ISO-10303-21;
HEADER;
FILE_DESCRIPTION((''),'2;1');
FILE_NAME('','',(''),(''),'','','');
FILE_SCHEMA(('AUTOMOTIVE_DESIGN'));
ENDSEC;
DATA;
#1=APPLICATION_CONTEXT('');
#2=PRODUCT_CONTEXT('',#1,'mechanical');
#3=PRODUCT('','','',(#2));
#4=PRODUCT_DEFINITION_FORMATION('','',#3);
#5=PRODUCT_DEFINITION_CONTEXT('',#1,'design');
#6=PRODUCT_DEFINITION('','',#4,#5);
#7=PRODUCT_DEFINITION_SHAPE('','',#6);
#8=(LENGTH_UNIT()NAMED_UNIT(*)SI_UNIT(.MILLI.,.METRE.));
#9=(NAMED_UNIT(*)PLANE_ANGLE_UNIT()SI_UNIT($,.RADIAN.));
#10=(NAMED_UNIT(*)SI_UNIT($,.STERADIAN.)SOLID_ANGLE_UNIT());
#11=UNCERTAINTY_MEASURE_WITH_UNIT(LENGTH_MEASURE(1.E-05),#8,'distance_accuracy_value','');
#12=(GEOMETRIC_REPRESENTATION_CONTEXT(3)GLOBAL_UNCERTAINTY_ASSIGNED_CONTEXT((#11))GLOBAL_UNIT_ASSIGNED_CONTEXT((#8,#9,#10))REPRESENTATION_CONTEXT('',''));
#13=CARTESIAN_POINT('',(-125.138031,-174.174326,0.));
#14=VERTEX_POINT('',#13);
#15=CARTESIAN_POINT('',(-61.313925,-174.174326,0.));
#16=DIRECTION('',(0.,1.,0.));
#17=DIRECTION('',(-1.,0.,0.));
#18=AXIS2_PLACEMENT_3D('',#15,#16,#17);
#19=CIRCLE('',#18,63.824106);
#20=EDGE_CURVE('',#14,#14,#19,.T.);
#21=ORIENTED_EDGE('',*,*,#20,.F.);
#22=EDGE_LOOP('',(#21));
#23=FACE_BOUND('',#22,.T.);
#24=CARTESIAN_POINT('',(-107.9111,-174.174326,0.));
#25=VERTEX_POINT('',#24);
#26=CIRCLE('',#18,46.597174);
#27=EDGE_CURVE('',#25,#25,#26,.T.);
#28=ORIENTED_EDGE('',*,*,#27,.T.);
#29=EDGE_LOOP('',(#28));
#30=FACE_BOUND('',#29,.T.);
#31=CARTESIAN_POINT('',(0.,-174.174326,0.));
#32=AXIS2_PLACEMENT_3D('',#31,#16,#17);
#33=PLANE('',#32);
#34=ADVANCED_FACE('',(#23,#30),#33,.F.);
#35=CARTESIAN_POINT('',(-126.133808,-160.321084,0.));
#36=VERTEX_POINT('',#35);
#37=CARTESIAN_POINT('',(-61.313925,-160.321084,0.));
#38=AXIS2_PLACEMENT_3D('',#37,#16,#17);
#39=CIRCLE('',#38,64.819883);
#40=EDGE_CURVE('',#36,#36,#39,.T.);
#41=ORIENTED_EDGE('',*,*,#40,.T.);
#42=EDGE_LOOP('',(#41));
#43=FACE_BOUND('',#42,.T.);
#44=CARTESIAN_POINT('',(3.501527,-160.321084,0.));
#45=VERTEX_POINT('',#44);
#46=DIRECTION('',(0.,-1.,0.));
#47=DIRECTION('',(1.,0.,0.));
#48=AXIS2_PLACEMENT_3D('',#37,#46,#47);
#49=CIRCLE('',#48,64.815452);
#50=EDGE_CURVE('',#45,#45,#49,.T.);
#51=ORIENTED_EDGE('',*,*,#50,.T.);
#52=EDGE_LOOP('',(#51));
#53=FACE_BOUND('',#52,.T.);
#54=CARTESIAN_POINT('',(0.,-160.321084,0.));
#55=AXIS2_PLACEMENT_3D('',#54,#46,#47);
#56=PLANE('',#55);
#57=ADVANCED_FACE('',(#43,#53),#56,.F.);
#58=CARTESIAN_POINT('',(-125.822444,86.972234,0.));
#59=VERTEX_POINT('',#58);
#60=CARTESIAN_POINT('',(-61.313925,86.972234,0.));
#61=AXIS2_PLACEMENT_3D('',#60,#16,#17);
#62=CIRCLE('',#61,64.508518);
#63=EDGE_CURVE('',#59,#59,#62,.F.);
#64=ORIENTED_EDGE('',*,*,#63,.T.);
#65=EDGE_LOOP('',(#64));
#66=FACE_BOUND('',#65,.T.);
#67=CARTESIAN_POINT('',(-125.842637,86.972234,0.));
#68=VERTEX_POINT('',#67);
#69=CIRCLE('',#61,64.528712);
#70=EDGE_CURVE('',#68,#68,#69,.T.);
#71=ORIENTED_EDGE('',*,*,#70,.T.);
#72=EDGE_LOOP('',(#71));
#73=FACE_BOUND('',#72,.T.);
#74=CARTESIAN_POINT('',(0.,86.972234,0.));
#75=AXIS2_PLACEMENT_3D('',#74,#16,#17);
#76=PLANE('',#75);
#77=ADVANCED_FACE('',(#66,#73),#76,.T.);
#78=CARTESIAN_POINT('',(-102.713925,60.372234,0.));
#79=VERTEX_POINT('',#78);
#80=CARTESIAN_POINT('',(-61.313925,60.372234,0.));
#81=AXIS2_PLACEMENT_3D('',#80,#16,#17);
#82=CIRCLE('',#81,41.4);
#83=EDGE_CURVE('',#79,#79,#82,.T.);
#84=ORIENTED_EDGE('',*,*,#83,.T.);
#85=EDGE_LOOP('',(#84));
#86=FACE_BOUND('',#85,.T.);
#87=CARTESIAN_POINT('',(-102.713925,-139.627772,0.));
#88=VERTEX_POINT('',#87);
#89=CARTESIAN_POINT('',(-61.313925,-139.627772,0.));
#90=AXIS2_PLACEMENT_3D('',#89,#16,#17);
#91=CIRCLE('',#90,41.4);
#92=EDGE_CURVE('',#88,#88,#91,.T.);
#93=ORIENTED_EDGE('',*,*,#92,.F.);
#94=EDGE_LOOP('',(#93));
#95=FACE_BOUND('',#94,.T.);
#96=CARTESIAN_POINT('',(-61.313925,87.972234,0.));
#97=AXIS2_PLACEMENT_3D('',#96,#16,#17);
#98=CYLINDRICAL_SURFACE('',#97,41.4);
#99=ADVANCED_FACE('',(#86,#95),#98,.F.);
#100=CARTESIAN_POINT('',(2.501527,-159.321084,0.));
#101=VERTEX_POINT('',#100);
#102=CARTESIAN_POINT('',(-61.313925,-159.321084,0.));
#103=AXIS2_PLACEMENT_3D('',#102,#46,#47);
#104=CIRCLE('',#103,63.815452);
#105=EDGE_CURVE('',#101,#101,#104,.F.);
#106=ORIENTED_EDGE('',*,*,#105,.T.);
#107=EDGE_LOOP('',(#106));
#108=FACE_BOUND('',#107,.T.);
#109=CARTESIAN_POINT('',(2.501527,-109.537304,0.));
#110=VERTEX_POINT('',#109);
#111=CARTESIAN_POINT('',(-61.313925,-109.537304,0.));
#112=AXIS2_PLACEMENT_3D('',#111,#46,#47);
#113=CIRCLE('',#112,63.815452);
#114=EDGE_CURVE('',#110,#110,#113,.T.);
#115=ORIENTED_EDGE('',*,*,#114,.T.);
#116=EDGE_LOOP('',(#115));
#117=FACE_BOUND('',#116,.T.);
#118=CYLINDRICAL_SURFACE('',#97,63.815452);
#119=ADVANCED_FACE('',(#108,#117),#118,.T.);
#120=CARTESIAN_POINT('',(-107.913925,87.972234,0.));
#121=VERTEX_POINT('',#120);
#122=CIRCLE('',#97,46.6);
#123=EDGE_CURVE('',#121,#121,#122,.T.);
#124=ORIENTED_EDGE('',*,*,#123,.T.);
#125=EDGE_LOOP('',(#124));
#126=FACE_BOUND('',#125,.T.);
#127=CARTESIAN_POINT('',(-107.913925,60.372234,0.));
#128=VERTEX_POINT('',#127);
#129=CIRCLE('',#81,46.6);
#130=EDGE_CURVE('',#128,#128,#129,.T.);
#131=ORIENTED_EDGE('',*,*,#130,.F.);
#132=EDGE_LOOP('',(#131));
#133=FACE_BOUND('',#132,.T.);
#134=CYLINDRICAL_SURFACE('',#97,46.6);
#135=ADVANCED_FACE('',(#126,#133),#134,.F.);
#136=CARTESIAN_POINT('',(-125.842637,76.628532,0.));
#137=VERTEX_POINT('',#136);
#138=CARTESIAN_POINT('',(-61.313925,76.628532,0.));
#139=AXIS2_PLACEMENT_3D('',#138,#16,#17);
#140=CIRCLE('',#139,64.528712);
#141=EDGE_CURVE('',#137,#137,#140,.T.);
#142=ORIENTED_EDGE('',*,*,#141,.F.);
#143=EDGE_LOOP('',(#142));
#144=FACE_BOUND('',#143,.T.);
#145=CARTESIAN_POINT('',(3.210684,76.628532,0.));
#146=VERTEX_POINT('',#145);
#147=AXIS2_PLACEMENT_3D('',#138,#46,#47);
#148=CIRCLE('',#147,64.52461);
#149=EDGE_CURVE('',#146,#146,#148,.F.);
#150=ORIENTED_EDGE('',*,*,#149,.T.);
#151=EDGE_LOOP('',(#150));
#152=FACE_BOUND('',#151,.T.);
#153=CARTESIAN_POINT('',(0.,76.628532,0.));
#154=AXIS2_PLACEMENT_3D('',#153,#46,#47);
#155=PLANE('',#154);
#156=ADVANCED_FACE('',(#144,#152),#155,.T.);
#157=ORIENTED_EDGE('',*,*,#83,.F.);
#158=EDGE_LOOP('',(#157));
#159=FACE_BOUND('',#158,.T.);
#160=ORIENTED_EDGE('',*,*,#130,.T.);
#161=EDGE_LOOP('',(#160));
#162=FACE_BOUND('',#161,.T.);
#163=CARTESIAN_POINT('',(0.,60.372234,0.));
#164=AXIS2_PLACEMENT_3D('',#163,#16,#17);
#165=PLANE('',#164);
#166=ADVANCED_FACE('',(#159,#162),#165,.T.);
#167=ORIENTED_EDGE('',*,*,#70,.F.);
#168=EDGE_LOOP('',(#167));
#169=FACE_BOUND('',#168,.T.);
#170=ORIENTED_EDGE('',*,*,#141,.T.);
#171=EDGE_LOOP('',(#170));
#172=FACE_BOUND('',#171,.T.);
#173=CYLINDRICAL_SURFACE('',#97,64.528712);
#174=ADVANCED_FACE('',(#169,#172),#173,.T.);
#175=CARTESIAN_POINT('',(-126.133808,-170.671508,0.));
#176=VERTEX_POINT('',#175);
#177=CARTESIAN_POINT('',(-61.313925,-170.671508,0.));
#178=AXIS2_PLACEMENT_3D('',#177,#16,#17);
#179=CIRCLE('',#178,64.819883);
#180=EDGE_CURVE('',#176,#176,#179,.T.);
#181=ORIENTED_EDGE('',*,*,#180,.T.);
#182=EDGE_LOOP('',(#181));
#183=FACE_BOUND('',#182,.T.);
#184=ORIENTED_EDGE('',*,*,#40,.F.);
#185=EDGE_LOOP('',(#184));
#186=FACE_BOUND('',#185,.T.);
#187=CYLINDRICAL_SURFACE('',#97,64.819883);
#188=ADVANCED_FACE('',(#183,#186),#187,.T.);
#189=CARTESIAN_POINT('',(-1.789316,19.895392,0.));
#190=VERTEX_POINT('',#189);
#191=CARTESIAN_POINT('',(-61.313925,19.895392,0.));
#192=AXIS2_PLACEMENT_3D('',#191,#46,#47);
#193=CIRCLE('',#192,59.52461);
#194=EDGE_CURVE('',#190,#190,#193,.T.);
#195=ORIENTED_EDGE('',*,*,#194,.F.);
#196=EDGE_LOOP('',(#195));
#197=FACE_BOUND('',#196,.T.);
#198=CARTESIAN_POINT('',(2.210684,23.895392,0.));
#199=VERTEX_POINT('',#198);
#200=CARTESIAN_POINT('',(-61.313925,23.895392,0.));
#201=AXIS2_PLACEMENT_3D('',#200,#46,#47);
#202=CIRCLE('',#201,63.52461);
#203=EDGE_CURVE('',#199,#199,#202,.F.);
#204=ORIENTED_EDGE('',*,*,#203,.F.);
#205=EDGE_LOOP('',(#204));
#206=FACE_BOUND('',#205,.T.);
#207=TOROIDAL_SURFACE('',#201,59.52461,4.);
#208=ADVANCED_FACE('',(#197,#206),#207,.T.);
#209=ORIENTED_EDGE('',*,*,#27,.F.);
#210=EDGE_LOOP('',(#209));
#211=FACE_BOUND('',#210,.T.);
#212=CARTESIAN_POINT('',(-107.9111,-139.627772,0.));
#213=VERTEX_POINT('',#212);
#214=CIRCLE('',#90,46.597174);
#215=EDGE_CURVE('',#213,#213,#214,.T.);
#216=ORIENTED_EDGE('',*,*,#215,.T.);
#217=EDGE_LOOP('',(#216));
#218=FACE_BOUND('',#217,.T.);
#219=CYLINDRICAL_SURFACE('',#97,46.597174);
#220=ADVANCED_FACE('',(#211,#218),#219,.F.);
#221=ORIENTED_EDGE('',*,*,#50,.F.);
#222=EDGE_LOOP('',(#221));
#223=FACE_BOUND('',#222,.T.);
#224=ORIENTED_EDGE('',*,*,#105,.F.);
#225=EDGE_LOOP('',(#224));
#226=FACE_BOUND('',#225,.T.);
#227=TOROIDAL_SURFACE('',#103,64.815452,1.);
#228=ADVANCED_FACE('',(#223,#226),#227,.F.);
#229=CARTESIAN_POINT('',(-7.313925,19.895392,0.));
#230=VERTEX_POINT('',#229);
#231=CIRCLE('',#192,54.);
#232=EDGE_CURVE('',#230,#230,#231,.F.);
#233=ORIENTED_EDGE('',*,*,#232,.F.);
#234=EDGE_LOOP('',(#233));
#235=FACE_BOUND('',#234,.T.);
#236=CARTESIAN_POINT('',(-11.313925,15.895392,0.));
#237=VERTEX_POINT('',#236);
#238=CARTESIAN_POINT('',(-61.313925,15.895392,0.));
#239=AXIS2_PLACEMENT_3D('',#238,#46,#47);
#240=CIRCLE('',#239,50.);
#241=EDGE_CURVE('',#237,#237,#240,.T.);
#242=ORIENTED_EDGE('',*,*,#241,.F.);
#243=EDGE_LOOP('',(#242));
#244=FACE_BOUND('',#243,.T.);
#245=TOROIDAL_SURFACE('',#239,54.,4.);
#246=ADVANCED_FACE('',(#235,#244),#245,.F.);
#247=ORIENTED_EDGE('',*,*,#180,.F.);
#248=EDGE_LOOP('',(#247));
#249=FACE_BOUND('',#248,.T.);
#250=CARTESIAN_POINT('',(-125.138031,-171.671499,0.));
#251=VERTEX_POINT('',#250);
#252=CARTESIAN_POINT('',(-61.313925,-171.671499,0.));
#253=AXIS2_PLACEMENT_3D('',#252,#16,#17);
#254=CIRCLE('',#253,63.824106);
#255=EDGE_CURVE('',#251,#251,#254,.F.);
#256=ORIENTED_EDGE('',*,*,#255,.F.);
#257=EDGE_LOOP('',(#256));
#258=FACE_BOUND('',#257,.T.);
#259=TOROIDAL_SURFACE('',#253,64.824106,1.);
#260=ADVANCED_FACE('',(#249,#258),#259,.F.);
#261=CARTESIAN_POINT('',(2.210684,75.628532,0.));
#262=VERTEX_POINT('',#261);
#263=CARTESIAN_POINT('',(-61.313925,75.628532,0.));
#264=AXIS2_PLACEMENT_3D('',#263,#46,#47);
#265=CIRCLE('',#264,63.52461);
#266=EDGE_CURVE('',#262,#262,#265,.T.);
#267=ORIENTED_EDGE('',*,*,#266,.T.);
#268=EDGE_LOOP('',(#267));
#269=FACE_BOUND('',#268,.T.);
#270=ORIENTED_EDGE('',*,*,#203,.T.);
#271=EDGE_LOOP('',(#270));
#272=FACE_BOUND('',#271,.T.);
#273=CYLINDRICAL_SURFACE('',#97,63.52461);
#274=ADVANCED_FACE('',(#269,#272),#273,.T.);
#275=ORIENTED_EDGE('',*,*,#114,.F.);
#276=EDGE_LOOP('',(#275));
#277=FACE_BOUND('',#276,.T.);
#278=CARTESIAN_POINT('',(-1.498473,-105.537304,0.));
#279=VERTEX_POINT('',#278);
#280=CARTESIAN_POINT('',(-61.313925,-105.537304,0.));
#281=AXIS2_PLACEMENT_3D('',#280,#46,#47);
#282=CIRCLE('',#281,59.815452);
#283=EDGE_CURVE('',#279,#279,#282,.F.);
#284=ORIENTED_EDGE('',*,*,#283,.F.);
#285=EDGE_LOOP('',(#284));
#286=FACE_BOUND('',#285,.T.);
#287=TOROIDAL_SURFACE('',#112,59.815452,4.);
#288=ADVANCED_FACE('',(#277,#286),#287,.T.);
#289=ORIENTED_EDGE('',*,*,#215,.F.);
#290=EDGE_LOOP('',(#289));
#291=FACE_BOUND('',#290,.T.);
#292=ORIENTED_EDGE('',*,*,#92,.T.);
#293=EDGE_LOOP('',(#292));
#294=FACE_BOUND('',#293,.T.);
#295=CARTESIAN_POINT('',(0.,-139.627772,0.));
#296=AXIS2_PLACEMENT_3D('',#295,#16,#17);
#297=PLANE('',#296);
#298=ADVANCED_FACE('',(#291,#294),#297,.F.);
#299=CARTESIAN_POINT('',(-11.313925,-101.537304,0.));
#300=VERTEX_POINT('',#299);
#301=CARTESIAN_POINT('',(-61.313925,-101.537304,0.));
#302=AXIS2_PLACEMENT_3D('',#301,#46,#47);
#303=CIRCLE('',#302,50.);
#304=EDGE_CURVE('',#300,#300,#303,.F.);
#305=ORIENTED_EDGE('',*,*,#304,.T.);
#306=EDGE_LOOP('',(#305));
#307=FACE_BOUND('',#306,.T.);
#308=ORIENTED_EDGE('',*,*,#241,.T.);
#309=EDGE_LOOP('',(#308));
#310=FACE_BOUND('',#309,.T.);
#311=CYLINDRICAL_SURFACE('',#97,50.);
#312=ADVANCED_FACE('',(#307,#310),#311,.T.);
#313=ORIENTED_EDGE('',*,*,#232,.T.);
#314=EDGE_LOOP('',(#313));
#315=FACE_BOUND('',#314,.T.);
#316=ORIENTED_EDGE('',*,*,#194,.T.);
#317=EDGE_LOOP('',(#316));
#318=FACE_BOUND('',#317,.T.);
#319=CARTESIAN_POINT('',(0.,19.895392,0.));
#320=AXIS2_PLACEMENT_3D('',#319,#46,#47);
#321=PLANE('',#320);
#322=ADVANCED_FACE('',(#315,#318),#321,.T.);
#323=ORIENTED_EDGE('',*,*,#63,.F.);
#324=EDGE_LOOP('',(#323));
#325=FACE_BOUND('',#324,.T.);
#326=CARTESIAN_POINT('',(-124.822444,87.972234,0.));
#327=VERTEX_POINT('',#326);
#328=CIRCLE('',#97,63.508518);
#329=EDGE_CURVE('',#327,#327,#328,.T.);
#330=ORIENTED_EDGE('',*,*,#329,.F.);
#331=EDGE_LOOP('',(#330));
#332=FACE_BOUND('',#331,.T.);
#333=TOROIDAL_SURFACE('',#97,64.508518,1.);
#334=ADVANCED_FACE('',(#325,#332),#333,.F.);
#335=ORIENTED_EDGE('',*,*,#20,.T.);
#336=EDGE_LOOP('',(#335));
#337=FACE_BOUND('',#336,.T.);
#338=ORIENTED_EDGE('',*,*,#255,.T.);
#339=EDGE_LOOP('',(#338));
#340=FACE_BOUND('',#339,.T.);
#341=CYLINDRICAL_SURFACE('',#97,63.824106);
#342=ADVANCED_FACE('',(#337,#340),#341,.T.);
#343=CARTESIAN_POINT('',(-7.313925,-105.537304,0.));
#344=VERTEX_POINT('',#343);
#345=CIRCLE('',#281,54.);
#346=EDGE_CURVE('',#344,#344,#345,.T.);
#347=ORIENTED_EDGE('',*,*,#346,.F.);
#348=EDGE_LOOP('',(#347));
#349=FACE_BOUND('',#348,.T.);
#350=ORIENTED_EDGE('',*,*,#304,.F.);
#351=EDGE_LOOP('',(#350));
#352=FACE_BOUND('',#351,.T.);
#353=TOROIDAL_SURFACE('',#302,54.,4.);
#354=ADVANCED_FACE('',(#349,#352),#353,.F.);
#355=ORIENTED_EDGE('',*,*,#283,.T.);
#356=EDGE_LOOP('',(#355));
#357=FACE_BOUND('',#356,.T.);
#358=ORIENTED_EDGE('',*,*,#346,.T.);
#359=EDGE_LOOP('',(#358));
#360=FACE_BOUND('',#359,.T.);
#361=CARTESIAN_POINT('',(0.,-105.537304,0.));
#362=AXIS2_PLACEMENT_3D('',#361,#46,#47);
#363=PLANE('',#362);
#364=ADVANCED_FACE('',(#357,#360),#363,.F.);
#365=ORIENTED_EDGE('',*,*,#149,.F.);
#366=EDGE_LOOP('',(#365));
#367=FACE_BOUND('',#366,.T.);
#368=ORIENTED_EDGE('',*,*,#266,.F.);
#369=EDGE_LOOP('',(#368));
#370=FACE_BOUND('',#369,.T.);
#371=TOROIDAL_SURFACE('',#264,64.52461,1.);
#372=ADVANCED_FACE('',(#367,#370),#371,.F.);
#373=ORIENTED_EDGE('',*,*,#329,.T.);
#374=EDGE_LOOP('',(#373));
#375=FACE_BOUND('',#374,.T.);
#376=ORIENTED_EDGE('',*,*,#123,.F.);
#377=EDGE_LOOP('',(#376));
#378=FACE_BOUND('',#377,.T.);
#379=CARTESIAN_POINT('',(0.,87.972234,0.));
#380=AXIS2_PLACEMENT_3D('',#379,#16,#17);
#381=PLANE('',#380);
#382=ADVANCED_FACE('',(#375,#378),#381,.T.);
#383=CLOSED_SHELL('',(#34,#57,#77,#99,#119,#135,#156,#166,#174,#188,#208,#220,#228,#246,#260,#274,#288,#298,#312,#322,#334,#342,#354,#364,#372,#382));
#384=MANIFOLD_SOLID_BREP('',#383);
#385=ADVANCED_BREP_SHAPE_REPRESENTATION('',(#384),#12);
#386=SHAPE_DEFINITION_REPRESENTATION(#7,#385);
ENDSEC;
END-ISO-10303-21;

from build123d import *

# Parameters (mm, degrees)
FILLET6_R = 1
FILLET7_R = 4


with BuildPart() as part:
    # Sketch1 → Revolve2 (revolve)
    with BuildSketch(Plane.XY, mode=Mode.PRIVATE) as revolve2_sk:
        Polygon((2.501527055, -105.537304088), (-11.313925207, -105.537304088), (-11.313925207, -39.627766165), (-11.313925207, 19.895392168), (2.210684424, 19.895392168), (2.210684424, 76.628531783), (3.214786306, 76.628531783), (3.214786306, 86.972233835), (2.194593265, 86.972233835), (2.194593265, 87.972233835), (-14.713925207, 87.972233835), (-14.713925207, 60.372233835), (-19.913925207, 60.372233835), (-19.913925207, -39.627771733), (-19.913925207, -139.627771733), (-14.716750826, -139.627771733), (-14.716750826, -174.174326464), (2.510180583, -174.174326464), (2.510180583, -170.671507731), (3.505957364, -170.671507731), (3.505957364, -160.321084419), (2.501527055, -160.321084419), align=None)
    revolve(revolve2_sk.sketch.rotate(Axis((-61.313925207, 87.972233835, 0), (0, -1, 0)), 180), axis=Axis((-61.313925207, 87.972233835, 0), (0, -1, 0)))

    # Fillet6
    # the kernel refuses this fillet: 1 mm, written as the material it adds along each edge
    with BuildSketch(Plane(origin=(-61.313925207, -160.321084419, 0), x_dir=(-1, 0, 0), z_dir=(0, 0, 1))) as fillet6_piece_1:
        with BuildLine():
            CenterArc((63.815452262 + FILLET6_R, -FILLET6_R), FILLET6_R, 90, 90)
            Line((63.815452262, -FILLET6_R), (63.815452262, 0))
            Line((63.815452262, 0), (63.815452262 + FILLET6_R, 0))
        make_face()
    revolve(axis=Axis((-61.313925207, -160.321084419, 0), (0, -1, 0)))
    with BuildSketch(Plane(origin=(-61.313925207, -170.671507731, 0), x_dir=(-1, 0, 0), z_dir=(0, 0, 1))) as fillet6_piece_2_section:
        with BuildLine():
            CenterArc((63.824105789 + FILLET6_R, FILLET6_R), FILLET6_R, 180, 90)
            Line((63.824105789 + FILLET6_R, 0), (63.824105789, 0))
            Line((63.824105789, 0), (63.824105789, FILLET6_R))
        make_face()
    fillet6_piece_2 = revolve(axis=Axis((-61.313925207, -170.671507731, 0), (0, -1, 0)), mode=Mode.PRIVATE)
    fillet6_piece_2 = fillet6_piece_2 & Plane(origin=(-61.313925207, -170.932863829, 0), x_dir=(-1, 0, 0), z_dir=(0, 1, 0)) * Cylinder(64.819882571, 260, mode=Mode.PRIVATE)
    add(fillet6_piece_2)
    with BuildSketch(Plane(origin=(-61.313925207, 86.972233835, 0), x_dir=(-1, 0, 0), z_dir=(0, 0, 1))) as fillet6_piece_3:
        with BuildLine():
            CenterArc((63.508518472 + FILLET6_R, -FILLET6_R), FILLET6_R, 90, 90)
            Line((63.508518472, -FILLET6_R), (63.508518472, 0))
            Line((63.508518472, 0), (63.508518472 + FILLET6_R, 0))
        make_face()
    revolve(axis=Axis((-61.313925207, 86.972233835, 0), (0, -1, 0)))
    with BuildSketch(Plane(origin=(-61.313925207, 76.628531783, 0), x_dir=(-1, 0, 0), z_dir=(0, 0, 1))) as fillet6_piece_4:
        with BuildLine():
            CenterArc((63.52460963 + FILLET6_R, FILLET6_R), FILLET6_R, 180, 90)
            Line((63.52460963 + FILLET6_R, 0), (63.52460963, 0))
            Line((63.52460963, 0), (63.52460963, FILLET6_R))
        make_face()
    revolve(axis=Axis((-61.313925207, 76.628531783, 0), (0, -1, 0)))

    # Fillet7
    fillet7_edges = [part.edges().sort_by_distance(p)[0] for p in [
        (2.501527055, -105.537304088, 0),
        (2.210684424, 19.895392168, 0),
        (-11.313925207, 19.895392168, 0),
        (-11.313925207, -105.537304088, 0),
    ]]
    fillet(fillet7_edges, radius=FILLET7_R)


solid = part.part
